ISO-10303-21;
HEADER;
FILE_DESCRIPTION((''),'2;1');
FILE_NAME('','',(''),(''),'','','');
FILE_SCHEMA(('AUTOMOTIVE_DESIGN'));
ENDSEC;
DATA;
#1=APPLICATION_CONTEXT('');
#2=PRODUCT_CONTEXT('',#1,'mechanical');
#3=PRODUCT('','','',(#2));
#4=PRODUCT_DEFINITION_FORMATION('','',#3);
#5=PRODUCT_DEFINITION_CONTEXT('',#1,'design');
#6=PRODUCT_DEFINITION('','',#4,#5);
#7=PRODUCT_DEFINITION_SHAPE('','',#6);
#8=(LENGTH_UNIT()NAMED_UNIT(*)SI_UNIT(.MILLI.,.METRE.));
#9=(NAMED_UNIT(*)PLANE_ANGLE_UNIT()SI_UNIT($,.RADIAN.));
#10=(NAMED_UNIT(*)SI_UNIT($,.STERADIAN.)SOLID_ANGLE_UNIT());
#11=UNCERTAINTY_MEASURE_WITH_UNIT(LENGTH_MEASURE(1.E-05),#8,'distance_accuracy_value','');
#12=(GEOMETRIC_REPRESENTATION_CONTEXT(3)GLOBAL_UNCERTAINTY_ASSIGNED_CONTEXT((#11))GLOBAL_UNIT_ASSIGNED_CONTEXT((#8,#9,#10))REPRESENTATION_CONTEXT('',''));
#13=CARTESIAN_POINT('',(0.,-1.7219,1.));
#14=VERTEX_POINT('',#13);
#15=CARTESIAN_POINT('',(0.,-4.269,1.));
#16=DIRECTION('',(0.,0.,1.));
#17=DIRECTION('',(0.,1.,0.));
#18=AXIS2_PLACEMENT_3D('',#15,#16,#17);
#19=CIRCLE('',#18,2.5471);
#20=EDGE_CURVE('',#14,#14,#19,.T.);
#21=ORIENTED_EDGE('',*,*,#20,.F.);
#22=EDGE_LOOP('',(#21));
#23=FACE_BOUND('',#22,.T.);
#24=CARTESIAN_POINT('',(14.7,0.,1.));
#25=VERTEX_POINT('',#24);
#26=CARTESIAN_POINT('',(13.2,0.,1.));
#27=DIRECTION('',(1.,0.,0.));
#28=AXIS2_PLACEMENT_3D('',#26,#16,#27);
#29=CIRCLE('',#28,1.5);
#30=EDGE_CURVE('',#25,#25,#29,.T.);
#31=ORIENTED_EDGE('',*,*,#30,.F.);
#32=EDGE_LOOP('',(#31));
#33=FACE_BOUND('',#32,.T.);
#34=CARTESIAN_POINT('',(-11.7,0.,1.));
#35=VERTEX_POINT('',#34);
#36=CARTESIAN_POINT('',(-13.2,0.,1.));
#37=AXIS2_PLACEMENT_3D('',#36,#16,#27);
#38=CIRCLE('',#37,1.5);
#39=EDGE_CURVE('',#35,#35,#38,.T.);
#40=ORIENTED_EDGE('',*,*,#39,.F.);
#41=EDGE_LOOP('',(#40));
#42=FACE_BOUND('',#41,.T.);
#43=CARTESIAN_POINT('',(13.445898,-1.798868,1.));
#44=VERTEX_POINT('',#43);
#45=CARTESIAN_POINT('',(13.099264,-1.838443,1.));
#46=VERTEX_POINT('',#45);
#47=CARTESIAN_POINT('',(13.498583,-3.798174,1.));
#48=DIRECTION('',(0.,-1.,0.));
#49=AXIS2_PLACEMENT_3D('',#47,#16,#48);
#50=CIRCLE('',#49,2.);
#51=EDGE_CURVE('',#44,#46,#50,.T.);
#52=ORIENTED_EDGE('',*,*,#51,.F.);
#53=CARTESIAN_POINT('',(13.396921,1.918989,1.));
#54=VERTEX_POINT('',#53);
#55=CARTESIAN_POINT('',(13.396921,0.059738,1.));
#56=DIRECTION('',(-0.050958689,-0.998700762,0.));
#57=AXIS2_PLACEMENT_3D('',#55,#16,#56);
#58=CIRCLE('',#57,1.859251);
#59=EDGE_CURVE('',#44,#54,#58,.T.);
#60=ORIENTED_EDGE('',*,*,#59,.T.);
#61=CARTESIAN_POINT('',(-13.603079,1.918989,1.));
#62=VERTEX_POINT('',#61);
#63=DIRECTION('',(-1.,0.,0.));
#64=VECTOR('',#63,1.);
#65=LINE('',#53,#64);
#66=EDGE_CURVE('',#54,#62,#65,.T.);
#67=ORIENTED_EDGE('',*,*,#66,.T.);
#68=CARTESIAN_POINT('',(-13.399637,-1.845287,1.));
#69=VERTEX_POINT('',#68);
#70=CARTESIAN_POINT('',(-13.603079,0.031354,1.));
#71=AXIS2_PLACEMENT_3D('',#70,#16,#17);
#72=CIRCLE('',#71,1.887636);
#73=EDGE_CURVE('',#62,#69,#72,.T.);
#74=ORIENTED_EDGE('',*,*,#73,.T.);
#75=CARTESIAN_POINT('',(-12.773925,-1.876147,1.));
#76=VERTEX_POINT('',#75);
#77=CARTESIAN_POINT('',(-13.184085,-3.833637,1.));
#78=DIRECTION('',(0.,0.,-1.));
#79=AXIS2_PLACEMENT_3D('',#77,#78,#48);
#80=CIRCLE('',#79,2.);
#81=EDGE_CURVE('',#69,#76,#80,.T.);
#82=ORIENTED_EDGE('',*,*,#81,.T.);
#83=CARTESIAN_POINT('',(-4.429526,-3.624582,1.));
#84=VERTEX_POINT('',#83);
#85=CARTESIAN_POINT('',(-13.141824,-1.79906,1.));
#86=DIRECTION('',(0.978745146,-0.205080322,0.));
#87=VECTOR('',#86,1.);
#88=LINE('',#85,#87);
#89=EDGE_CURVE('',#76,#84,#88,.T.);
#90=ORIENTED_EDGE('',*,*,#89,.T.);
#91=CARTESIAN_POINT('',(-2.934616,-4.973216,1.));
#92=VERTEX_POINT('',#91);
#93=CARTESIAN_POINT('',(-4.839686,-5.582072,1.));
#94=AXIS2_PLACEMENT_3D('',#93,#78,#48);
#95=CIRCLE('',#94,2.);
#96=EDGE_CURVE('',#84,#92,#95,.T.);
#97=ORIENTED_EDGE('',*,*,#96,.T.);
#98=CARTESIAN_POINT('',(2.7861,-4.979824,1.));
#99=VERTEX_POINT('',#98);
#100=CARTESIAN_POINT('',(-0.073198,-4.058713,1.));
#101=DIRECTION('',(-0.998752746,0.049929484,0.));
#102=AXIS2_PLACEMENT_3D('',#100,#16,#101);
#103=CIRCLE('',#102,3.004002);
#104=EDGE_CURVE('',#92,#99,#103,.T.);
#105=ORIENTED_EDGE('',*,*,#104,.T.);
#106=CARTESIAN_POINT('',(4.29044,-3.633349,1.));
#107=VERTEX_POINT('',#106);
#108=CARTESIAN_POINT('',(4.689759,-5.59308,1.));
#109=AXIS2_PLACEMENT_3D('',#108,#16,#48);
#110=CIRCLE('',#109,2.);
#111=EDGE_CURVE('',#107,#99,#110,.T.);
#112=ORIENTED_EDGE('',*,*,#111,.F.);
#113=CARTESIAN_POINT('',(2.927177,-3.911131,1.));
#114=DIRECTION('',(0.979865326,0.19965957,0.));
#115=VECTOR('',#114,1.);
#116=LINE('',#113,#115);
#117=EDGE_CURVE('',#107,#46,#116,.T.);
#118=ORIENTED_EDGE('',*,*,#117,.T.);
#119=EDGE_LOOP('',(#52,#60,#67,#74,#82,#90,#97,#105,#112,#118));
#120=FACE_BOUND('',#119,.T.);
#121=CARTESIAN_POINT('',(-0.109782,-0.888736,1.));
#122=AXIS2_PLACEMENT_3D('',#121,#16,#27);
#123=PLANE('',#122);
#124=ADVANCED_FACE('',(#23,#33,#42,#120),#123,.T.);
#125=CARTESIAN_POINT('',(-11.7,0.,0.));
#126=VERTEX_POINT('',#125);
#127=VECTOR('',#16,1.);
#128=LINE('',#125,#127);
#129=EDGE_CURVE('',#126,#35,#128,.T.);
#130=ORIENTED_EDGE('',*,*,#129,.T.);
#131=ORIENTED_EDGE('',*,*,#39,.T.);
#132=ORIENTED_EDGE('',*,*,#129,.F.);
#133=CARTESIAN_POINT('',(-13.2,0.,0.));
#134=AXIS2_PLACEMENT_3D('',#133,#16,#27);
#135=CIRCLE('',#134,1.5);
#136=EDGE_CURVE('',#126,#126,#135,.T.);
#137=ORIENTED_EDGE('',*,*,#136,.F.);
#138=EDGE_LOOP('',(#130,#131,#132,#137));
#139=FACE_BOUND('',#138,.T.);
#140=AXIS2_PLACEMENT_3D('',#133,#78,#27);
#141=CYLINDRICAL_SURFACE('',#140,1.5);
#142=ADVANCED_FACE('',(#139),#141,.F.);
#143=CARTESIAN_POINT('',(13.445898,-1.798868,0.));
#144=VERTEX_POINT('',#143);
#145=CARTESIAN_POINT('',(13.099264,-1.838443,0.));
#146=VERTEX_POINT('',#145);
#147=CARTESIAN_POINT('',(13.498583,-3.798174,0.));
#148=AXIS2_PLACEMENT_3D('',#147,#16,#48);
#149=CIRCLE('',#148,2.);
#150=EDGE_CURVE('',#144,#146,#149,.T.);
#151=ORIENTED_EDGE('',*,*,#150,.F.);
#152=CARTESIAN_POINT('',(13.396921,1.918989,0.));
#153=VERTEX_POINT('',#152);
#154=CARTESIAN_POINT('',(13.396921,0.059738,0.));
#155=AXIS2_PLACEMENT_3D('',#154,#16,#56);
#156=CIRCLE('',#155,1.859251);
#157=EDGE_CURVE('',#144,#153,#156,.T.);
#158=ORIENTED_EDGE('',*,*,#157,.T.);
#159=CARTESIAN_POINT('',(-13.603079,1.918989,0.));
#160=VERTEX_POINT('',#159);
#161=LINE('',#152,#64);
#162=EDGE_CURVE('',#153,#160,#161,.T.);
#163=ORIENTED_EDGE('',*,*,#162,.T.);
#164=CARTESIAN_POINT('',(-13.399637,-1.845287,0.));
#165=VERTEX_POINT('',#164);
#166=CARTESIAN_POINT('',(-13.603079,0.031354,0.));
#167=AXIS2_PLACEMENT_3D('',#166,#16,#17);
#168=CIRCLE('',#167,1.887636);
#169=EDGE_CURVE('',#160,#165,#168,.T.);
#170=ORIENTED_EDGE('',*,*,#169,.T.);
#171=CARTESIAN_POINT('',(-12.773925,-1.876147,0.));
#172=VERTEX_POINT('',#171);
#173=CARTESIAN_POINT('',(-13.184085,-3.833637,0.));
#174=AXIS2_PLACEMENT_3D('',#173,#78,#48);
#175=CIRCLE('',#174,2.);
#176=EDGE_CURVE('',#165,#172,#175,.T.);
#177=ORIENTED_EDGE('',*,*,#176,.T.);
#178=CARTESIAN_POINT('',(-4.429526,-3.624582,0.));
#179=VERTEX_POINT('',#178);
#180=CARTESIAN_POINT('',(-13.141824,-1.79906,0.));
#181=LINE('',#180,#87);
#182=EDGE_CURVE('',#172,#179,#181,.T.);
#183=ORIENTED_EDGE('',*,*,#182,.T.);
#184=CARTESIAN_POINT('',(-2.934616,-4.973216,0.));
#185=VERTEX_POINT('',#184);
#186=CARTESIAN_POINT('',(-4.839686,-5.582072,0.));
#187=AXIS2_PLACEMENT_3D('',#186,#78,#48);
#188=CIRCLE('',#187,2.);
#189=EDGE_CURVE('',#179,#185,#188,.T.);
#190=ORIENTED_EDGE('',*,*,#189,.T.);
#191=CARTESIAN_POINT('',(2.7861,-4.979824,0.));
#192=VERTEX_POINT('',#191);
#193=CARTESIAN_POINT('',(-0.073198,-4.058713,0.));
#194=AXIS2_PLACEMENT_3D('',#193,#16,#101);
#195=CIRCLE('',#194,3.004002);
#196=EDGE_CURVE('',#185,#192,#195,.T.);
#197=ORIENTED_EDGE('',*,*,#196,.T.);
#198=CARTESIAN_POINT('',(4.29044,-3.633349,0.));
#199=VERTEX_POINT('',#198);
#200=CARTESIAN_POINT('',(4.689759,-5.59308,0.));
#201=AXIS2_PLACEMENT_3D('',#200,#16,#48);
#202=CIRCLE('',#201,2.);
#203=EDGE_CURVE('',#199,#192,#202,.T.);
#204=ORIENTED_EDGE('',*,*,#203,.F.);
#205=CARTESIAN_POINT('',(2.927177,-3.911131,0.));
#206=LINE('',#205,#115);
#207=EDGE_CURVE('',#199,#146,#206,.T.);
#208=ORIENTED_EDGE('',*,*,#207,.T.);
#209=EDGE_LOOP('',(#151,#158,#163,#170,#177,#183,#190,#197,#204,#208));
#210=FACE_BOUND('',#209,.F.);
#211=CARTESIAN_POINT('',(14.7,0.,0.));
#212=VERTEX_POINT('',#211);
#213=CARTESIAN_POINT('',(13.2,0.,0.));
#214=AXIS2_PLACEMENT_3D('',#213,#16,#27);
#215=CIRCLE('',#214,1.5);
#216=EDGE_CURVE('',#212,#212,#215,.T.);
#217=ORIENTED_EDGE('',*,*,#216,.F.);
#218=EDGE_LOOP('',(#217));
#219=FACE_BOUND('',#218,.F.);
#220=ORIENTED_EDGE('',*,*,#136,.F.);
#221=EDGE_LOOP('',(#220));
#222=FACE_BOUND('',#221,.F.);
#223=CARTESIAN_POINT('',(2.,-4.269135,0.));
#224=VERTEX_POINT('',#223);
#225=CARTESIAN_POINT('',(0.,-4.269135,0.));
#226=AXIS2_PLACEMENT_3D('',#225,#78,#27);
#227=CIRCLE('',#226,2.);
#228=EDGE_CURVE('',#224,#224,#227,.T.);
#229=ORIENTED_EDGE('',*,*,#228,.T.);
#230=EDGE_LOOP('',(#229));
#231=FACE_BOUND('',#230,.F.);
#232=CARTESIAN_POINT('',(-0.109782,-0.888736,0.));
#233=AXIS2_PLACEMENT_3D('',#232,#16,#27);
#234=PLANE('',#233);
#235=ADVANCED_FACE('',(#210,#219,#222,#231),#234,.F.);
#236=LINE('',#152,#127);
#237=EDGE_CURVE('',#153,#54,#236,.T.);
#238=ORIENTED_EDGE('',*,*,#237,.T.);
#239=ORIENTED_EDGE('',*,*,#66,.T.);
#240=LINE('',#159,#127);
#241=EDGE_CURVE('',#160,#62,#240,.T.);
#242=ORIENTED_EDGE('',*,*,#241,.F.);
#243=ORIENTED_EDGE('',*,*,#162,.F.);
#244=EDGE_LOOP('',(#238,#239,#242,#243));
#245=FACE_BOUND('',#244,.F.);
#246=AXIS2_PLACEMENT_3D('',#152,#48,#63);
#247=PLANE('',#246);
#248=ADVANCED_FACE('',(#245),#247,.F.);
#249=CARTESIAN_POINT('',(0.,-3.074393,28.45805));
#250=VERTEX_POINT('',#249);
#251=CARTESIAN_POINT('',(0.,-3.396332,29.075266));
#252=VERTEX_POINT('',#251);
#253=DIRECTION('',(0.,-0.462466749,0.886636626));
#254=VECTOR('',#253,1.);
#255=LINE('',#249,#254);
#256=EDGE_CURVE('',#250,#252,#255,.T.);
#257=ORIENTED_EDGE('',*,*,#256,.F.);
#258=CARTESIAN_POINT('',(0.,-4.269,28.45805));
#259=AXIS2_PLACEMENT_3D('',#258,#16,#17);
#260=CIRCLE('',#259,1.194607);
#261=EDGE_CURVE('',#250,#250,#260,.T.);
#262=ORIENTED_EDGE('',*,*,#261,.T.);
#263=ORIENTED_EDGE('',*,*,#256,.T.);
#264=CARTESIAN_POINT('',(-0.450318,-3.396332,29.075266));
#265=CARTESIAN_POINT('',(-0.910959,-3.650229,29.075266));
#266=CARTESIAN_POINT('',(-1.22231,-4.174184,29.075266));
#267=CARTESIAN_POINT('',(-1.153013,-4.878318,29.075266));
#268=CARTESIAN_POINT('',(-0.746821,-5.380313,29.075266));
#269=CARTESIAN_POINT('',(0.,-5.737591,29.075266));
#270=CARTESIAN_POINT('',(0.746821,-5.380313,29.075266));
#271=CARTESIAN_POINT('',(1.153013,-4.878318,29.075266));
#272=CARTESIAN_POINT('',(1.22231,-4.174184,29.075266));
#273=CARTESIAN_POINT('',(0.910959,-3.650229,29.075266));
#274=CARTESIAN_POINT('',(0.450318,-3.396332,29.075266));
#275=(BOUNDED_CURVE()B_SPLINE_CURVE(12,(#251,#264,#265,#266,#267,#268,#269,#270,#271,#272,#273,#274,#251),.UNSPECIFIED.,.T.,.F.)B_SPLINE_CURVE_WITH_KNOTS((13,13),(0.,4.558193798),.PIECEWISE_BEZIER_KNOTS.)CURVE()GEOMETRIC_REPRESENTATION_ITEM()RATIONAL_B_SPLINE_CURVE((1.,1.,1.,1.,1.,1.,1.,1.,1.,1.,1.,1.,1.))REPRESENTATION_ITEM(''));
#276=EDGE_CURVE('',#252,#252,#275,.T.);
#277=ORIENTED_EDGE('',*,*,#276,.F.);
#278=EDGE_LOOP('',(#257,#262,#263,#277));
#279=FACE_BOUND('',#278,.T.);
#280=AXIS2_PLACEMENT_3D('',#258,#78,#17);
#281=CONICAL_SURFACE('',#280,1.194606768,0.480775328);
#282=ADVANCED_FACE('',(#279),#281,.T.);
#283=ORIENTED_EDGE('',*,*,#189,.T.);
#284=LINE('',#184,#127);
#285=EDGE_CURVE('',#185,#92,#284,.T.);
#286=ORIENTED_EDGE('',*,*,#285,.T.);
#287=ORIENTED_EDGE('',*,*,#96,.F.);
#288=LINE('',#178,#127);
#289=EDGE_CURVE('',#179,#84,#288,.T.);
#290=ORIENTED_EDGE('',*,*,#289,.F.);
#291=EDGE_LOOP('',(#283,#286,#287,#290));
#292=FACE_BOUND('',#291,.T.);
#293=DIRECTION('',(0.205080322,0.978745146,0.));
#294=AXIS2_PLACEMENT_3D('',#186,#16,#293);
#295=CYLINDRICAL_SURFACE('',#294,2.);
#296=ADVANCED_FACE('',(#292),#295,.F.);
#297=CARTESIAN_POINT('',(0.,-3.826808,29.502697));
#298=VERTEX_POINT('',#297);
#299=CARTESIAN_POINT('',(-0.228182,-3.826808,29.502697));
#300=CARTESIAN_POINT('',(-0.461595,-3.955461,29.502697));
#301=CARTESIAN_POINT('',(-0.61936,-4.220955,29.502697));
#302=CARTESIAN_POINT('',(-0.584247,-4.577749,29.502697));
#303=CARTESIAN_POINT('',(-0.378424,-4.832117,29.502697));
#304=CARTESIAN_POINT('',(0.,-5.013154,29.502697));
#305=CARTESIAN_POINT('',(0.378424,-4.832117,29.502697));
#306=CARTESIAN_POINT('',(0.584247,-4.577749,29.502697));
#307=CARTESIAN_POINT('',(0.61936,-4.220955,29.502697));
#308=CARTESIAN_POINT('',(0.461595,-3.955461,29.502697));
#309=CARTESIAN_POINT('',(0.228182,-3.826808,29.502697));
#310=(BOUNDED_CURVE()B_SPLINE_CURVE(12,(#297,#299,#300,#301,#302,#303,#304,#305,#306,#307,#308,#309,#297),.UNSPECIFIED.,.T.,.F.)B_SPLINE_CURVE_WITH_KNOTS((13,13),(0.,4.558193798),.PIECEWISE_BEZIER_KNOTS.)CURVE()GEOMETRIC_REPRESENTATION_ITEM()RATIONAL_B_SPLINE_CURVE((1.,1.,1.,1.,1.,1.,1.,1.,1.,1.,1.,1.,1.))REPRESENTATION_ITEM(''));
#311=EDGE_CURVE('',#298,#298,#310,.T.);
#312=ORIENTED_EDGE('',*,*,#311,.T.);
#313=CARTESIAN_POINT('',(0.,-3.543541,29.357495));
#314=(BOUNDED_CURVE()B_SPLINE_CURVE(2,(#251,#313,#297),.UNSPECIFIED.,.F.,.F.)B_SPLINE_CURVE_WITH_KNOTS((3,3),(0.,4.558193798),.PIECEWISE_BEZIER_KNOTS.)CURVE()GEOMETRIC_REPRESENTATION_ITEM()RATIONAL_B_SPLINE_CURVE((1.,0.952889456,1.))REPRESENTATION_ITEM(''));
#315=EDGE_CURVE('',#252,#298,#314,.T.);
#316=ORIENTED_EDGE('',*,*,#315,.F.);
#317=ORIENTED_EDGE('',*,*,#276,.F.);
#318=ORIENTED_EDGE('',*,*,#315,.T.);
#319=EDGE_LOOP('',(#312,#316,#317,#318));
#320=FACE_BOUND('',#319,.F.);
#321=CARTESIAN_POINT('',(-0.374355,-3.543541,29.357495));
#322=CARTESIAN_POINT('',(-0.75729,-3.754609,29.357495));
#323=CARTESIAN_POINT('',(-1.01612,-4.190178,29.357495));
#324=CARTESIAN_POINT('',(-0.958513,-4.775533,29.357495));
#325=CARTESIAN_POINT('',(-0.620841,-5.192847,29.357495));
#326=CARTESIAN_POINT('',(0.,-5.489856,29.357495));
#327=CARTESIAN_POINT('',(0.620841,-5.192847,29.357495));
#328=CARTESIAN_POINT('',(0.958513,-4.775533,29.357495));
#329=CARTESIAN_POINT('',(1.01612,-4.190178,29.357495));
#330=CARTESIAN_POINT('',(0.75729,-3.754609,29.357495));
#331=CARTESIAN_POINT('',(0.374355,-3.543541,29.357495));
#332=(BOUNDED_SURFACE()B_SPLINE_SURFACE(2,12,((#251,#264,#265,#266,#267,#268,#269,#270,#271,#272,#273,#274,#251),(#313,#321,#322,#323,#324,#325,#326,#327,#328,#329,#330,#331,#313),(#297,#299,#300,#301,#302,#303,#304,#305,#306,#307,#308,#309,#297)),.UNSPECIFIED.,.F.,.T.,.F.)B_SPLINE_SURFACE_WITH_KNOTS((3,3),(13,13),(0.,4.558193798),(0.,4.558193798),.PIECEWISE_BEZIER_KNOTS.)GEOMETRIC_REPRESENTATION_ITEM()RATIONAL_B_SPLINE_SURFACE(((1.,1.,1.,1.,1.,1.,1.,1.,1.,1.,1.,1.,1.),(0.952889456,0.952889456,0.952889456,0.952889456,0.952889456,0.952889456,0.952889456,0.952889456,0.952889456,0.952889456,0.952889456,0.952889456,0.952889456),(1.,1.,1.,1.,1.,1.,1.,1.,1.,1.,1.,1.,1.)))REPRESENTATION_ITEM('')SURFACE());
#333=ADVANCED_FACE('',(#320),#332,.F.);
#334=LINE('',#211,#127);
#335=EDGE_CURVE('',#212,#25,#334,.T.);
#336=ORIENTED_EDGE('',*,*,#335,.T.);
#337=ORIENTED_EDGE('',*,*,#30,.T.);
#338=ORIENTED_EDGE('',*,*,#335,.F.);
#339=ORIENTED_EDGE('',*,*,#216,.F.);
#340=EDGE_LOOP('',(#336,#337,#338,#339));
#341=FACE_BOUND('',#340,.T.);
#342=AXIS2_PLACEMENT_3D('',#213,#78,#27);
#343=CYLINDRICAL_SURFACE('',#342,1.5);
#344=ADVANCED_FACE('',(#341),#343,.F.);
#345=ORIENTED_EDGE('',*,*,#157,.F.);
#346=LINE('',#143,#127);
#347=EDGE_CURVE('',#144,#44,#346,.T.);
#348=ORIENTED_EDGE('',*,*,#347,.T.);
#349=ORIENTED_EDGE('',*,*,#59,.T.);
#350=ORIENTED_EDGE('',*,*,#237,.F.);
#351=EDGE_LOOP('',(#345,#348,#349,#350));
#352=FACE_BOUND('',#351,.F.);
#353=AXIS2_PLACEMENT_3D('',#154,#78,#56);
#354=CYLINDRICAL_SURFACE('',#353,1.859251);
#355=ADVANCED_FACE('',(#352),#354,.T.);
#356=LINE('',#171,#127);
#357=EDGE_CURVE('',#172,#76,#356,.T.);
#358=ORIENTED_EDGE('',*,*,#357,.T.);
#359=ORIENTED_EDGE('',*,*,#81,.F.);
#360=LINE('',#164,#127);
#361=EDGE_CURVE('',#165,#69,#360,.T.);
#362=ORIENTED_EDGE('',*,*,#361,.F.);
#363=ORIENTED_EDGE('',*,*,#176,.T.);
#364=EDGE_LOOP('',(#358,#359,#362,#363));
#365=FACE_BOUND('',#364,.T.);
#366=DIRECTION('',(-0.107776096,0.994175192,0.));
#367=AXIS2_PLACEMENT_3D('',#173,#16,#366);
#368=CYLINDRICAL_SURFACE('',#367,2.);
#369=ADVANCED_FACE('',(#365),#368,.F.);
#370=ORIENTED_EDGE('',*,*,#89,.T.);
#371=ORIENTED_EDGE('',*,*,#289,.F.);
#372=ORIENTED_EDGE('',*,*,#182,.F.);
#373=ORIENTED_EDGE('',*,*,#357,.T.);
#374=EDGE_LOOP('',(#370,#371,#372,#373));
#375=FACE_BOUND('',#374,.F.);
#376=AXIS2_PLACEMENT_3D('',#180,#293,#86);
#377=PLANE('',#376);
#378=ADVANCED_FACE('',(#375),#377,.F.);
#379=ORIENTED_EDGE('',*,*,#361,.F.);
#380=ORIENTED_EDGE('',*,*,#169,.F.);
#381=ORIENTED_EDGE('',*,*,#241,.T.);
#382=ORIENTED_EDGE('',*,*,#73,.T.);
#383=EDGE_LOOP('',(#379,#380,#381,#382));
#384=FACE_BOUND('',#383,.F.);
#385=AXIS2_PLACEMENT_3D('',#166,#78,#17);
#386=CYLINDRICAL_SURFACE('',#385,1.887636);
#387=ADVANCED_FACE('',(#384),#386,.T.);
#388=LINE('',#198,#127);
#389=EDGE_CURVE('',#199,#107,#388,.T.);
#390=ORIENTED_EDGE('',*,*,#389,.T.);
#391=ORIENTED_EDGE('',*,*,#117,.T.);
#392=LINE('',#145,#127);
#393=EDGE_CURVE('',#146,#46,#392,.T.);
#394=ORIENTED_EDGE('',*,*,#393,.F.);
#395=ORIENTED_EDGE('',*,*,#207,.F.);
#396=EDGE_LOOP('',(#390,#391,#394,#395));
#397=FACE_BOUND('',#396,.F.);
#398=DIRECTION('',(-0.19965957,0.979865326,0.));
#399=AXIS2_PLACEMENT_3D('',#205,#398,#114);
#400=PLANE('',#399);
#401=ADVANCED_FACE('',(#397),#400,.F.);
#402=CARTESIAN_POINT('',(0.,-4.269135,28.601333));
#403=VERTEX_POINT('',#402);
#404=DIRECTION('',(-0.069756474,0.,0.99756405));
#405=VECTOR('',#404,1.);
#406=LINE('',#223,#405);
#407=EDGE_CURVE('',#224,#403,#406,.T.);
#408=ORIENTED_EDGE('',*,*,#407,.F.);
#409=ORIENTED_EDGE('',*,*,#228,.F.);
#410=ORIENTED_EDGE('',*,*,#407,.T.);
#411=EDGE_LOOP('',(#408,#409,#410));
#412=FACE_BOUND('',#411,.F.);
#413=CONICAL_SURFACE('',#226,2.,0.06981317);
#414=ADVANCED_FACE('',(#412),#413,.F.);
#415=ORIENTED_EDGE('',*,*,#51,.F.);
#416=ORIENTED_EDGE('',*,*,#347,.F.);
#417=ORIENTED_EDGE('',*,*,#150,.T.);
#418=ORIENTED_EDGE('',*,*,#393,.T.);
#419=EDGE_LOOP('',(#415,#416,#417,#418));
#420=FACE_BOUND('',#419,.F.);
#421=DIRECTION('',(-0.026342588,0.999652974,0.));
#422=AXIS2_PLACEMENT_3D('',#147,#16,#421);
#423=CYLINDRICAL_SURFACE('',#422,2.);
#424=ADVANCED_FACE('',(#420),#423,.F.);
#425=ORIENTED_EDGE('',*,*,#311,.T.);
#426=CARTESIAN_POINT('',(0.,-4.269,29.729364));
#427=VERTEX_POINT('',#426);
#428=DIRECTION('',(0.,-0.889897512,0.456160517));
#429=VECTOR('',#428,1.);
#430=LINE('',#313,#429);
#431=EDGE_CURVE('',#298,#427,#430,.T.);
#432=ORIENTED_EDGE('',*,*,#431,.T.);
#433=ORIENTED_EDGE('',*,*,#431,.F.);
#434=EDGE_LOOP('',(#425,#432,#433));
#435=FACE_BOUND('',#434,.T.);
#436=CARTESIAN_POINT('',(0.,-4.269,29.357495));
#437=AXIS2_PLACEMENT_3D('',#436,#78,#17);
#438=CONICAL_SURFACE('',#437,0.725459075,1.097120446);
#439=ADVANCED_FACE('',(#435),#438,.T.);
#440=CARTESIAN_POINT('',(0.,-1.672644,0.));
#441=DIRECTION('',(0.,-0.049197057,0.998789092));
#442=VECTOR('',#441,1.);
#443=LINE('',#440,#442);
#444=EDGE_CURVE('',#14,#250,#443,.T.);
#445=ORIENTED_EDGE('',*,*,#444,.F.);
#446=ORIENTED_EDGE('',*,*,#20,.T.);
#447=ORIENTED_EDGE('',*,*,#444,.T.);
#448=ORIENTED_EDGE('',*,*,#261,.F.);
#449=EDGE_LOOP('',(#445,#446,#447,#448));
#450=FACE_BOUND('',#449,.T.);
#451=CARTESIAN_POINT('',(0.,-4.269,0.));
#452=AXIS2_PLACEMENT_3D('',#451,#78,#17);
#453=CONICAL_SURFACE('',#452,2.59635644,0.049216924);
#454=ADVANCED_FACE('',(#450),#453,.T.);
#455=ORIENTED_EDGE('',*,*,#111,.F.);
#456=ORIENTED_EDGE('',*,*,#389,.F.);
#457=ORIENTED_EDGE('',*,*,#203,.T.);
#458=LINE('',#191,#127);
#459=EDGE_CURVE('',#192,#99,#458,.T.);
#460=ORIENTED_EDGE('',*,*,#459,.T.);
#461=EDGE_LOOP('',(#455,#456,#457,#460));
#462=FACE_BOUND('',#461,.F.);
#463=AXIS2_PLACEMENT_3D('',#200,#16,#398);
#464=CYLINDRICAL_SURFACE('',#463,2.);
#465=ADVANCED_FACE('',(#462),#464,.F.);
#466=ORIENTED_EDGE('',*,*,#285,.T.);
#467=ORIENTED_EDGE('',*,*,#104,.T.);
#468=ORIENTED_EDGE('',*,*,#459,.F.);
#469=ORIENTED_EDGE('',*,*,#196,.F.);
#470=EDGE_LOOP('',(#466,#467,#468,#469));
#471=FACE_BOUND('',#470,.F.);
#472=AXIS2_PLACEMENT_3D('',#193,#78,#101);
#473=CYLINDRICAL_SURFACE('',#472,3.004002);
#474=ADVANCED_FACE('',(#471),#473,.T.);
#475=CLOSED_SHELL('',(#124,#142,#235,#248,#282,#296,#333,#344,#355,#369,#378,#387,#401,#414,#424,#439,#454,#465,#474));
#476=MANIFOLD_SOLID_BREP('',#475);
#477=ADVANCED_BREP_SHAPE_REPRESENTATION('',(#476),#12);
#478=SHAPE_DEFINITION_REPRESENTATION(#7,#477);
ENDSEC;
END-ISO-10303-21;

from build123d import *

# Parameters (mm, degrees)
F0_R     = 2.25
F0_R_2   = 1.5
F1_DEPTH = 1
F2_R     = 2
F5_R     = 2
F6_DEPTH = 29.7303643356
F6_TAPER = 4
F7_R     = 1


with BuildPart() as f1:
    # F0 (on Top) → F1 (new body)
    with BuildSketch(Plane.XY):
        with BuildLine():
            Line((13.3969206363, 1.9189893501), (-13.6030793637, 1.9189893501))
            ThreePointArc((-13.6030793637, 1.9189893501), (-15.476354869, -0.2010418621), (-13.1418243737, -1.7990596423))
            Line((-13.1418243737, -1.7990596423), (-3.0734528816, -3.9087251454))
            ThreePointArc((-3.0734528816, -3.9087251454), (-0.0744018388, -7.0627152846), (2.9271771184, -3.9111308071))
            Line((2.9271771184, -3.9111308071), (13.3021756263, -1.7970976995))
            ThreePointArc((13.3021756263, -1.7970976995), (15.2555679655, 0.0123501208), (13.3969206363, 1.9189893501))
        make_face()
        with Locations((0, -4.3)):
            Circle(F0_R, mode=Mode.SUBTRACT)
        with Locations((-13.2, 0)):
            Circle(F0_R_2, mode=Mode.SUBTRACT)
        with Locations((13.2, 0)):
            Circle(F0_R_2, mode=Mode.SUBTRACT)
    extrude(amount=F1_DEPTH)

    # F2
    f2_edges = [f1.edges().sort_by_distance(p)[0] for p in [
        (2.927177, -3.911131, 0.5),
        (13.302176, -1.797098, 0.5),
        (-13.141824, -1.79906, 0.5),
        (-3.073453, -3.908725, 0.5),
    ]]
    fillet(f2_edges, radius=F2_R)

    # F3 (on Right) → F4 (revolve)
    with BuildSketch(Plane.YZ):
        Polygon((-4.2690001428, 0), (-1.6726437025, 0), (-3.0743933748, 28.4580495209), (-3.5435410682, 29.3574947864), (-4.2690001428, 29.7293643356), align=None)
    revolve(axis=Axis((0, -4.2690001428, 17.7293643356), (0, 0, 1)))

    # F5 (on face) → F6 (cut, through all)
    with BuildSketch(Plane.XY):
        with Locations((0, -4.2691347189)):
            Circle(F5_R)
    extrude(amount=F6_DEPTH, taper=F6_TAPER, mode=Mode.SUBTRACT)

    # F7
    f7_edges = [f1.edges().sort_by_distance(p)[0] for p in [
        (0, -4.994459, 29.357495),
    ]]
    fillet(f7_edges, radius=F7_R)


solid = f1.part
